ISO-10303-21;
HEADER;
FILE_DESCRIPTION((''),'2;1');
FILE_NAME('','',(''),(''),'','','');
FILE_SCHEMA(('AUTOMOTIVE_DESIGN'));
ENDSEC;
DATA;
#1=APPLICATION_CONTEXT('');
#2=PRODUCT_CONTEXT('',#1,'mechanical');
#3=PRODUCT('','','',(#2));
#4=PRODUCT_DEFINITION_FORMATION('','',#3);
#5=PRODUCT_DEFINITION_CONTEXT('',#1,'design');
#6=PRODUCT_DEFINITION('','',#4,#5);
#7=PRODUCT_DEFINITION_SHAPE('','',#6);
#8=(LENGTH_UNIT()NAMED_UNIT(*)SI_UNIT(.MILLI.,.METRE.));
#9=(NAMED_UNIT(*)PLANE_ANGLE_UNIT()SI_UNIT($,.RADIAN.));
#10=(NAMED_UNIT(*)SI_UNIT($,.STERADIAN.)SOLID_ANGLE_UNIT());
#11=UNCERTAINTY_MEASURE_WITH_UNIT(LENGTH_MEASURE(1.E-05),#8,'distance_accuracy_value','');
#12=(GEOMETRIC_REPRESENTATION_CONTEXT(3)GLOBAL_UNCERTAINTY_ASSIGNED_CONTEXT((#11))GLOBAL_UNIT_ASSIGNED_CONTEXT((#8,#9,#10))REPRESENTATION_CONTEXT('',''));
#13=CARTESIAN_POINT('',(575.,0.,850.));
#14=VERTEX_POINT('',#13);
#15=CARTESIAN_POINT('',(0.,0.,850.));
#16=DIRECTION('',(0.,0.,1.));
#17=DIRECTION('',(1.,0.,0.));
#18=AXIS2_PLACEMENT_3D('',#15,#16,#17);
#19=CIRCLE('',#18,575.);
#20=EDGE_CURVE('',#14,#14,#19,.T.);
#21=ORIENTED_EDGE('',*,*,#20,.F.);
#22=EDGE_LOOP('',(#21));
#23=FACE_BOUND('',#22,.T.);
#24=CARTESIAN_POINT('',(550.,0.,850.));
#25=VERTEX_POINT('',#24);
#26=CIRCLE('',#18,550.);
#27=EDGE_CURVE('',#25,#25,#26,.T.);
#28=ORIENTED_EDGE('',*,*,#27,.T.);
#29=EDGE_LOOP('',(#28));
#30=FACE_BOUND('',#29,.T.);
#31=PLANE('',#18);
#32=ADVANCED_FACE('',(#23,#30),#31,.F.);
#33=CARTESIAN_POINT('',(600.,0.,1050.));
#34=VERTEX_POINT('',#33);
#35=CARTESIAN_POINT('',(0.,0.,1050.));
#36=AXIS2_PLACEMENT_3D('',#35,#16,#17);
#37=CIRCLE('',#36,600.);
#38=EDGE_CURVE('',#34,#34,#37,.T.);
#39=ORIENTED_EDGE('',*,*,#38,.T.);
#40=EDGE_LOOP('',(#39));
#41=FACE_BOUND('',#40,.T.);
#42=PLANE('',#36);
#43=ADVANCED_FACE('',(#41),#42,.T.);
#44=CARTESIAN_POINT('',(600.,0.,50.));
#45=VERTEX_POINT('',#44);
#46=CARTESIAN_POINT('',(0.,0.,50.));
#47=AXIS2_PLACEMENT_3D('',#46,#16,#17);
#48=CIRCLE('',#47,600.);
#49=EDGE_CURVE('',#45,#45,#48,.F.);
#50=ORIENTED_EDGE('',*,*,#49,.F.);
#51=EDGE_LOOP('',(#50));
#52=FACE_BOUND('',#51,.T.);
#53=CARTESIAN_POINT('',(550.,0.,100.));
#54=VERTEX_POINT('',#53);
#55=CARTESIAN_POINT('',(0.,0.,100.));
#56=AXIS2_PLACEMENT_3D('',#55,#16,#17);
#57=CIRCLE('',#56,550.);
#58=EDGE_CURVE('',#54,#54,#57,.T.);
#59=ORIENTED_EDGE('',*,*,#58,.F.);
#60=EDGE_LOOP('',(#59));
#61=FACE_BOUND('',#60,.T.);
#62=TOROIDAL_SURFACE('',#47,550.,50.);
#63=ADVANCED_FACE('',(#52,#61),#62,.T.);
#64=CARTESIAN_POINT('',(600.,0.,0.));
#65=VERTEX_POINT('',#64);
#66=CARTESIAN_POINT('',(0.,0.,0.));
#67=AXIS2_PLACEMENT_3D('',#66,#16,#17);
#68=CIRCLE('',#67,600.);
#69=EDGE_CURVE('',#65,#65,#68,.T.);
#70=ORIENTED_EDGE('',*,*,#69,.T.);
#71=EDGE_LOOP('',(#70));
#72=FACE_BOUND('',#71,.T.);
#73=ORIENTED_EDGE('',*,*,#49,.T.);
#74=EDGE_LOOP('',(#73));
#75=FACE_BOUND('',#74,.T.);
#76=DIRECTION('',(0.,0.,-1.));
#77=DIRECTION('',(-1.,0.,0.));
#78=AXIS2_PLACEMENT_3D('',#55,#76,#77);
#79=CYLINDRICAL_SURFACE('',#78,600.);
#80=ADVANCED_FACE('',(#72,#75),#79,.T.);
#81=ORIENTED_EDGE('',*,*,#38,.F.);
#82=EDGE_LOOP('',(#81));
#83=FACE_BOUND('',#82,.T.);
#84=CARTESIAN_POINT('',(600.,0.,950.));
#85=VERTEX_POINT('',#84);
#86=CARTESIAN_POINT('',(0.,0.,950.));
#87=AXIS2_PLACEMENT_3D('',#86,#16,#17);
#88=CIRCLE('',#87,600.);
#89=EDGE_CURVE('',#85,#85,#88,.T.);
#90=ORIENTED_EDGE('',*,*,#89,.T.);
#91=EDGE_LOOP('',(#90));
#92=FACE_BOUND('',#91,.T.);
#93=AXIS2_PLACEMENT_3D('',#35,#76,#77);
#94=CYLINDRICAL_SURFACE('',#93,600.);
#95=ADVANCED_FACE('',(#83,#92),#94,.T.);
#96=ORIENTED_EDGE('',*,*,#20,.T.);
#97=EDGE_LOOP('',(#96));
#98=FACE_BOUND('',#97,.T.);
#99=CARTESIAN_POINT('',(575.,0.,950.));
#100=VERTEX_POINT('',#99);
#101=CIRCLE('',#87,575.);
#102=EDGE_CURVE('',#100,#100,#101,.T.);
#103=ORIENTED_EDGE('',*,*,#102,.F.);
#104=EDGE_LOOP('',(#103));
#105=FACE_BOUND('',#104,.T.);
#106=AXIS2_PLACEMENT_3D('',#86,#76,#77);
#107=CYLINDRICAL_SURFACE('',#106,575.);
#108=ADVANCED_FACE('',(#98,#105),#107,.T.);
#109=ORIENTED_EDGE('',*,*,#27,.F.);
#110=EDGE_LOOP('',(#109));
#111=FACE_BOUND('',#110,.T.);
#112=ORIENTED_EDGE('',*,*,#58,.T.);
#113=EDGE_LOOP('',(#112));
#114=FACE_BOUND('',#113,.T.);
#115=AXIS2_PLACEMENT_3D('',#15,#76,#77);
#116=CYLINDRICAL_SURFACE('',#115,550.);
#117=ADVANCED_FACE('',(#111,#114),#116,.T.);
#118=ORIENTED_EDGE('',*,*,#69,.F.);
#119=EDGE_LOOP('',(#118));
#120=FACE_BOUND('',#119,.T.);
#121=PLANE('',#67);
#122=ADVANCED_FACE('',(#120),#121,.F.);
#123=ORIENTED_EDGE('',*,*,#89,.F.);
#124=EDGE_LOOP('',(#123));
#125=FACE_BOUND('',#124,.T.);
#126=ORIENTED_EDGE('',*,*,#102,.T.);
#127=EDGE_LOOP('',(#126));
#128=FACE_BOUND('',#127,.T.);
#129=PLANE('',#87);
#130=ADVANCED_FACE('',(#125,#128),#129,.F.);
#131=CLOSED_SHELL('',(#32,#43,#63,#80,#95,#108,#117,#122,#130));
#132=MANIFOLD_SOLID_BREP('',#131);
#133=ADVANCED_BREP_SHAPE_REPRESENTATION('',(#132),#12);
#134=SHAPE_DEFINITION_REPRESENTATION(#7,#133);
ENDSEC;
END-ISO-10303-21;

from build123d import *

# Parameters (mm, degrees)
SKETCH2_R           = 600
BOSS_EXTRUDE1_DEPTH = 100
SKETCH3_R           = 550
BOSS_EXTRUDE2_DEPTH = 750
FILLET1_R           = 50
SKETCH4_R           = 575
BOSS_EXTRUDE3_DEPTH = 100
SKETCH5_R           = 600
BOSS_EXTRUDE4_DEPTH = 100


with BuildPart() as part:
    # Sketch2 → Boss-Extrude1 (new body)
    with BuildSketch(Plane.XY):
        Circle(SKETCH2_R)
    extrude(amount=BOSS_EXTRUDE1_DEPTH)

    # Sketch3 → Boss-Extrude2 (add)
    with BuildSketch(Plane.XY.offset(100)):
        Circle(SKETCH3_R)
    extrude(amount=BOSS_EXTRUDE2_DEPTH)

    # Fillet1
    fillet1_edges = [part.edges().sort_by_distance(p)[0] for p in [
        (-600, 0, 100),
    ]]
    fillet(fillet1_edges, radius=FILLET1_R - 0.0001)  # a hair under: the kernel refuses the full size

    # Sketch4 → Boss-Extrude3 (add)
    with BuildSketch(Plane.XY.offset(850)):
        Circle(SKETCH4_R)
    extrude(amount=BOSS_EXTRUDE3_DEPTH)

    # Sketch5 → Boss-Extrude4 (add)
    with BuildSketch(Plane.XY.offset(950)):
        Circle(SKETCH5_R)
    extrude(amount=BOSS_EXTRUDE4_DEPTH)


solid = part.part
